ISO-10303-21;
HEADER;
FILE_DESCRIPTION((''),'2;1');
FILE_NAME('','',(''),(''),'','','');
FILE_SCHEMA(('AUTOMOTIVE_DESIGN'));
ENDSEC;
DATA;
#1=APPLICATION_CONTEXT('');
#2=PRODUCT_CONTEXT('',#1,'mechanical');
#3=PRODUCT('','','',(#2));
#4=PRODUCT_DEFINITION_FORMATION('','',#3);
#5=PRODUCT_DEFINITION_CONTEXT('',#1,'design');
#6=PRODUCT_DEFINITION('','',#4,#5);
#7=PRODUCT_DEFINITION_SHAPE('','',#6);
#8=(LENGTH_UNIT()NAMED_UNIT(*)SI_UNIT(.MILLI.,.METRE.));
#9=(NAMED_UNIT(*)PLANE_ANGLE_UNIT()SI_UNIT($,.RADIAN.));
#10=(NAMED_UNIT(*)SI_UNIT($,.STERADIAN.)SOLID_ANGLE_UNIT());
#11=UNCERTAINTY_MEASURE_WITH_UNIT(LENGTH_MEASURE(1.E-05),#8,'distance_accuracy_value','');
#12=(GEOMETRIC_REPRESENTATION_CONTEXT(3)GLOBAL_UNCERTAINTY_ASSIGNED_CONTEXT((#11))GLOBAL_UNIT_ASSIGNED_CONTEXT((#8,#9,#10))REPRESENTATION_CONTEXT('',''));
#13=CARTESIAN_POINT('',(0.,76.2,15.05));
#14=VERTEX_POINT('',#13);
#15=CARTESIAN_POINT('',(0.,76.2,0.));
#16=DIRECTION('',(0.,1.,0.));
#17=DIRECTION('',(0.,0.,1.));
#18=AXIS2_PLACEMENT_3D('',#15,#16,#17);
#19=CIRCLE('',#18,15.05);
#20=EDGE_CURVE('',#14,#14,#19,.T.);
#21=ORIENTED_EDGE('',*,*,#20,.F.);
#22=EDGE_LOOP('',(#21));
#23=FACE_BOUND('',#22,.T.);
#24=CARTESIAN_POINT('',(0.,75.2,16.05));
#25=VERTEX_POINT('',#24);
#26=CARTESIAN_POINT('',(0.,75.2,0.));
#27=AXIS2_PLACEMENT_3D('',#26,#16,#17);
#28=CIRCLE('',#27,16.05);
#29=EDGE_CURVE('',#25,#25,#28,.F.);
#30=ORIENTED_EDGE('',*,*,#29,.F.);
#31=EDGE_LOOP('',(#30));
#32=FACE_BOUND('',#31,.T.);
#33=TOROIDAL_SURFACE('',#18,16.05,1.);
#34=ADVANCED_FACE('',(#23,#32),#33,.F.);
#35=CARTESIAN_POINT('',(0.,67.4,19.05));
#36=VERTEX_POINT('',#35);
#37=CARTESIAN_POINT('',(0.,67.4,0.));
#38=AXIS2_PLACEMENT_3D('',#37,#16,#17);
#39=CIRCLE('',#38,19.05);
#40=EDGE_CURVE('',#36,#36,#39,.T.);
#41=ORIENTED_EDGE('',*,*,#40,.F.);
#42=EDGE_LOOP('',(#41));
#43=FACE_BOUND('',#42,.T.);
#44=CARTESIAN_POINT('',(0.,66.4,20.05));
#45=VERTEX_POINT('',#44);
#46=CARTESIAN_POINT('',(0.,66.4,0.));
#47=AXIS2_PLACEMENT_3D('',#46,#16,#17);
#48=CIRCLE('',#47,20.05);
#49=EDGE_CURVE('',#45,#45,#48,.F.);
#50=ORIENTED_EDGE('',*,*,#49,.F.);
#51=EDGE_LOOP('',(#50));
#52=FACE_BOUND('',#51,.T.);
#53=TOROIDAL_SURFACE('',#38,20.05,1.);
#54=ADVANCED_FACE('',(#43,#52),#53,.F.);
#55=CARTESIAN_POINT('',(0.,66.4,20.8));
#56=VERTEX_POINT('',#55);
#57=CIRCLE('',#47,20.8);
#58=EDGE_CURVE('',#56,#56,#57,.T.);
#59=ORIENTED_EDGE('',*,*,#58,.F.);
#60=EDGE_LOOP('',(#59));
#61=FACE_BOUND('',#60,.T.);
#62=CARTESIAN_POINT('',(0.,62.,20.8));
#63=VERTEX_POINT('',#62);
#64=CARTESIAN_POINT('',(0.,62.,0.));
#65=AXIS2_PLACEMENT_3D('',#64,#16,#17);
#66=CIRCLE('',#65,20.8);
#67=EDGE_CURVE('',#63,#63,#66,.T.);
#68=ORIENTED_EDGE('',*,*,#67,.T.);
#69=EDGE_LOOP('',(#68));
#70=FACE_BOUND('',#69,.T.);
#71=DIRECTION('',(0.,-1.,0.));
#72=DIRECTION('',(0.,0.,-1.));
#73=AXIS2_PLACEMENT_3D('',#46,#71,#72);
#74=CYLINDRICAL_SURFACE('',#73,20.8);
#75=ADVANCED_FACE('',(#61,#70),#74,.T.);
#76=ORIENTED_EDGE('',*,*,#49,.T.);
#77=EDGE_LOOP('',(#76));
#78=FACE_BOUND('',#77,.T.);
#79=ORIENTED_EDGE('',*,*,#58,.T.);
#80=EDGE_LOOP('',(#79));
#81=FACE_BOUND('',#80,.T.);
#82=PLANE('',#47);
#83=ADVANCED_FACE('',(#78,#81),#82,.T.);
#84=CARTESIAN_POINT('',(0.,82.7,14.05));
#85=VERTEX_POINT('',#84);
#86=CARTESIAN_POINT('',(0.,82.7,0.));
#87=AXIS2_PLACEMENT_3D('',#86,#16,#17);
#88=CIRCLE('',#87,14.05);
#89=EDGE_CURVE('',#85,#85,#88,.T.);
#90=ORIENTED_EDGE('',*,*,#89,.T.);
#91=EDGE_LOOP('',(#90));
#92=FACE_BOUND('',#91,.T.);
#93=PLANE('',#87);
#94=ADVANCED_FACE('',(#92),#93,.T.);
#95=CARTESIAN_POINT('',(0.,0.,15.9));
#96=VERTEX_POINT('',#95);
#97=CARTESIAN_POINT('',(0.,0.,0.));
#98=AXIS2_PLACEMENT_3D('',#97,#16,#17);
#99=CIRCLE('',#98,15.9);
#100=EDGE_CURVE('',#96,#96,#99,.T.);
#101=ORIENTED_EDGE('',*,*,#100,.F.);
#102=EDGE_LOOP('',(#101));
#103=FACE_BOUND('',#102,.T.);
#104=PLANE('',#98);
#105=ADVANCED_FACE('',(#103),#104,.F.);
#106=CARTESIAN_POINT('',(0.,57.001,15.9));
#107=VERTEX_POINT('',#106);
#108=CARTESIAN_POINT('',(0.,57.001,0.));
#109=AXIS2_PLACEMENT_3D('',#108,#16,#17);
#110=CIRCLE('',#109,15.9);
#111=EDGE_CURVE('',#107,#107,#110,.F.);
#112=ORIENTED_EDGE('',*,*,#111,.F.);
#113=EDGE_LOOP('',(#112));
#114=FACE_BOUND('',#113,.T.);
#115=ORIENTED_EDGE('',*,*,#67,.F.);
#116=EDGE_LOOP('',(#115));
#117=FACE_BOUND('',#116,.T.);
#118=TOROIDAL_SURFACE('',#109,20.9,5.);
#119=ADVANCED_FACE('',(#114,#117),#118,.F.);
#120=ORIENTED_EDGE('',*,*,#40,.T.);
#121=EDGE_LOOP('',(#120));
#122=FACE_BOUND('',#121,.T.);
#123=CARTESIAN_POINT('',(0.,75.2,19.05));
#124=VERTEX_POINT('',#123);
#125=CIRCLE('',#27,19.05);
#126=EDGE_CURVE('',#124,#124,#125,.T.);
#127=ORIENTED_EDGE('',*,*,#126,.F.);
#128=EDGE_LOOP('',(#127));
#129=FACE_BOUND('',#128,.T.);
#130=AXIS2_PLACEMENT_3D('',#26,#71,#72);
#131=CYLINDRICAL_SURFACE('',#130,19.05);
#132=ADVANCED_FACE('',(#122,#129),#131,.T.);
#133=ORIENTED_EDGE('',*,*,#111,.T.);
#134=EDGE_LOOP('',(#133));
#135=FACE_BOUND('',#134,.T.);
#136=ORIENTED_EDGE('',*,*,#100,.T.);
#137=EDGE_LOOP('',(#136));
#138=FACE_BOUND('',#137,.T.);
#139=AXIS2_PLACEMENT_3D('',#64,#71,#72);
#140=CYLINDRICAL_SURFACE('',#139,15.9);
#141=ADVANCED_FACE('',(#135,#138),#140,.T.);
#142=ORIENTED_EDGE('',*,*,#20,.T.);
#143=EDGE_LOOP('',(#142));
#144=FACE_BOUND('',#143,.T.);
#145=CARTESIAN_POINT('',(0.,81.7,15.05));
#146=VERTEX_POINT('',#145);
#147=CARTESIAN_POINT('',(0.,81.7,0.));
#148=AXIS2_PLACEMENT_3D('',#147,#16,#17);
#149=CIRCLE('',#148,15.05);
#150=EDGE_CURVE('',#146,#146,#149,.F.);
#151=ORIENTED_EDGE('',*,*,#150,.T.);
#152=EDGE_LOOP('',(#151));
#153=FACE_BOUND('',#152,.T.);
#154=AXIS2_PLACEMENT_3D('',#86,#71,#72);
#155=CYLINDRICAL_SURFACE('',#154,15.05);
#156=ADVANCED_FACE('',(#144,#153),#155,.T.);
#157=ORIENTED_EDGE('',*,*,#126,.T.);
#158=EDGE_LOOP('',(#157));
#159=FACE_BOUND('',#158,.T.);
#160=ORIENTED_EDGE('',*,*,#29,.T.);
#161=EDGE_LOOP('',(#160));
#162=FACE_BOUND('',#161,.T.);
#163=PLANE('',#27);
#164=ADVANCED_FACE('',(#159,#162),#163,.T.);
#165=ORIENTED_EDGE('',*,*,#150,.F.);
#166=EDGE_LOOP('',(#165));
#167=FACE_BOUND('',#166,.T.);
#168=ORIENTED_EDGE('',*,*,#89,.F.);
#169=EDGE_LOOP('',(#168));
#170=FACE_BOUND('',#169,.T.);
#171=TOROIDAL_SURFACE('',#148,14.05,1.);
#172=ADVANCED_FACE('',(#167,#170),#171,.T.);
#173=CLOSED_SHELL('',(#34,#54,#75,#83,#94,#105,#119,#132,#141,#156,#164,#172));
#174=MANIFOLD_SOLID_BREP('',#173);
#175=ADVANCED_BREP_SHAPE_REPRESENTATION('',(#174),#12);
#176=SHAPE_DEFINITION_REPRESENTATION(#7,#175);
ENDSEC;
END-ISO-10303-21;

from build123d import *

# Parameters (mm, degrees)
SKETCH1_R           = 15.9
BOSS_EXTRUDE1_DEPTH = 62
SKETCH2_R           = 20.8
BOSS_EXTRUDE2_DEPTH = 4.4
SKETCH3_R           = 19.05
BOSS_EXTRUDE3_DEPTH = 8.8
SKETCH4_R           = 15.05
BOSS_EXTRUDE4_DEPTH = 7.5
FILLET1_R           = 5
FILLET2_R           = 1


with BuildPart() as part:
    # Sketch1 → Boss-Extrude1 (new body)
    with BuildSketch(Plane(origin=(0, 0, 0), x_dir=(1, 0, 0), z_dir=(0, 1, 0))):
        with Locations(Location((0, 0, 0), (0, 0, 270))):
            Circle(SKETCH1_R)
    extrude(amount=BOSS_EXTRUDE1_DEPTH)

    # Sketch2 → Boss-Extrude2 (add)
    with BuildSketch(Plane(origin=(0, 62, 0), x_dir=(1, 0, 0), z_dir=(0, 1, 0))):
        with Locations(Location((0, 0, 0), (0, 0, 270))):
            Circle(SKETCH2_R)
    extrude(amount=BOSS_EXTRUDE2_DEPTH)

    # Sketch3 → Boss-Extrude3 (add)
    with BuildSketch(Plane(origin=(0, 66.4, 0), x_dir=(1, 0, 0), z_dir=(0, 1, 0))):
        with Locations(Location((0, 0, 0), (0, 0, 270))):
            Circle(SKETCH3_R)
    extrude(amount=BOSS_EXTRUDE3_DEPTH)

    # Sketch4 → Boss-Extrude4 (add)
    with BuildSketch(Plane(origin=(0, 75.2, 0), x_dir=(1, 0, 0), z_dir=(0, 1, 0))):
        with Locations(Location((0, 0, 0), (0, 0, 270))):
            Circle(SKETCH4_R)
    extrude(amount=BOSS_EXTRUDE4_DEPTH)

    # Fillet1
    # the kernel refuses this fillet: 5 mm, written as the material it adds along each edge
    with BuildSketch(Plane(origin=(0, 62, 0), x_dir=(0, 0, 1), z_dir=(-1, 0, 0))) as fillet1_piece_1_section:
        with BuildLine():
            CenterArc((15.9 + FILLET1_R, -FILLET1_R), FILLET1_R, 90, 90)
            Line((15.9, -FILLET1_R), (15.9, 0))
            Line((15.9, 0), (15.9 + FILLET1_R, 0))
        make_face()
    fillet1_piece_1 = revolve(axis=Axis((0, 62, 0), (0, 1, 0)), mode=Mode.PRIVATE)
    fillet1_piece_1 = fillet1_piece_1 & Plane(origin=(0, 60.561583107, 0), x_dir=(0, 0, 1), z_dir=(0, -1, 0)) * Cylinder(20.8, 84, mode=Mode.PRIVATE)
    add(fillet1_piece_1)

    # Fillet2
    fillet2_edges = [part.edges().sort_by_distance(p)[0] for p in [
        (0, 75.2, -15.05),
        (0, 82.7, -15.05),
        (0, 66.4, -19.05),
    ]]
    fillet(fillet2_edges, radius=FILLET2_R)


solid = part.part
